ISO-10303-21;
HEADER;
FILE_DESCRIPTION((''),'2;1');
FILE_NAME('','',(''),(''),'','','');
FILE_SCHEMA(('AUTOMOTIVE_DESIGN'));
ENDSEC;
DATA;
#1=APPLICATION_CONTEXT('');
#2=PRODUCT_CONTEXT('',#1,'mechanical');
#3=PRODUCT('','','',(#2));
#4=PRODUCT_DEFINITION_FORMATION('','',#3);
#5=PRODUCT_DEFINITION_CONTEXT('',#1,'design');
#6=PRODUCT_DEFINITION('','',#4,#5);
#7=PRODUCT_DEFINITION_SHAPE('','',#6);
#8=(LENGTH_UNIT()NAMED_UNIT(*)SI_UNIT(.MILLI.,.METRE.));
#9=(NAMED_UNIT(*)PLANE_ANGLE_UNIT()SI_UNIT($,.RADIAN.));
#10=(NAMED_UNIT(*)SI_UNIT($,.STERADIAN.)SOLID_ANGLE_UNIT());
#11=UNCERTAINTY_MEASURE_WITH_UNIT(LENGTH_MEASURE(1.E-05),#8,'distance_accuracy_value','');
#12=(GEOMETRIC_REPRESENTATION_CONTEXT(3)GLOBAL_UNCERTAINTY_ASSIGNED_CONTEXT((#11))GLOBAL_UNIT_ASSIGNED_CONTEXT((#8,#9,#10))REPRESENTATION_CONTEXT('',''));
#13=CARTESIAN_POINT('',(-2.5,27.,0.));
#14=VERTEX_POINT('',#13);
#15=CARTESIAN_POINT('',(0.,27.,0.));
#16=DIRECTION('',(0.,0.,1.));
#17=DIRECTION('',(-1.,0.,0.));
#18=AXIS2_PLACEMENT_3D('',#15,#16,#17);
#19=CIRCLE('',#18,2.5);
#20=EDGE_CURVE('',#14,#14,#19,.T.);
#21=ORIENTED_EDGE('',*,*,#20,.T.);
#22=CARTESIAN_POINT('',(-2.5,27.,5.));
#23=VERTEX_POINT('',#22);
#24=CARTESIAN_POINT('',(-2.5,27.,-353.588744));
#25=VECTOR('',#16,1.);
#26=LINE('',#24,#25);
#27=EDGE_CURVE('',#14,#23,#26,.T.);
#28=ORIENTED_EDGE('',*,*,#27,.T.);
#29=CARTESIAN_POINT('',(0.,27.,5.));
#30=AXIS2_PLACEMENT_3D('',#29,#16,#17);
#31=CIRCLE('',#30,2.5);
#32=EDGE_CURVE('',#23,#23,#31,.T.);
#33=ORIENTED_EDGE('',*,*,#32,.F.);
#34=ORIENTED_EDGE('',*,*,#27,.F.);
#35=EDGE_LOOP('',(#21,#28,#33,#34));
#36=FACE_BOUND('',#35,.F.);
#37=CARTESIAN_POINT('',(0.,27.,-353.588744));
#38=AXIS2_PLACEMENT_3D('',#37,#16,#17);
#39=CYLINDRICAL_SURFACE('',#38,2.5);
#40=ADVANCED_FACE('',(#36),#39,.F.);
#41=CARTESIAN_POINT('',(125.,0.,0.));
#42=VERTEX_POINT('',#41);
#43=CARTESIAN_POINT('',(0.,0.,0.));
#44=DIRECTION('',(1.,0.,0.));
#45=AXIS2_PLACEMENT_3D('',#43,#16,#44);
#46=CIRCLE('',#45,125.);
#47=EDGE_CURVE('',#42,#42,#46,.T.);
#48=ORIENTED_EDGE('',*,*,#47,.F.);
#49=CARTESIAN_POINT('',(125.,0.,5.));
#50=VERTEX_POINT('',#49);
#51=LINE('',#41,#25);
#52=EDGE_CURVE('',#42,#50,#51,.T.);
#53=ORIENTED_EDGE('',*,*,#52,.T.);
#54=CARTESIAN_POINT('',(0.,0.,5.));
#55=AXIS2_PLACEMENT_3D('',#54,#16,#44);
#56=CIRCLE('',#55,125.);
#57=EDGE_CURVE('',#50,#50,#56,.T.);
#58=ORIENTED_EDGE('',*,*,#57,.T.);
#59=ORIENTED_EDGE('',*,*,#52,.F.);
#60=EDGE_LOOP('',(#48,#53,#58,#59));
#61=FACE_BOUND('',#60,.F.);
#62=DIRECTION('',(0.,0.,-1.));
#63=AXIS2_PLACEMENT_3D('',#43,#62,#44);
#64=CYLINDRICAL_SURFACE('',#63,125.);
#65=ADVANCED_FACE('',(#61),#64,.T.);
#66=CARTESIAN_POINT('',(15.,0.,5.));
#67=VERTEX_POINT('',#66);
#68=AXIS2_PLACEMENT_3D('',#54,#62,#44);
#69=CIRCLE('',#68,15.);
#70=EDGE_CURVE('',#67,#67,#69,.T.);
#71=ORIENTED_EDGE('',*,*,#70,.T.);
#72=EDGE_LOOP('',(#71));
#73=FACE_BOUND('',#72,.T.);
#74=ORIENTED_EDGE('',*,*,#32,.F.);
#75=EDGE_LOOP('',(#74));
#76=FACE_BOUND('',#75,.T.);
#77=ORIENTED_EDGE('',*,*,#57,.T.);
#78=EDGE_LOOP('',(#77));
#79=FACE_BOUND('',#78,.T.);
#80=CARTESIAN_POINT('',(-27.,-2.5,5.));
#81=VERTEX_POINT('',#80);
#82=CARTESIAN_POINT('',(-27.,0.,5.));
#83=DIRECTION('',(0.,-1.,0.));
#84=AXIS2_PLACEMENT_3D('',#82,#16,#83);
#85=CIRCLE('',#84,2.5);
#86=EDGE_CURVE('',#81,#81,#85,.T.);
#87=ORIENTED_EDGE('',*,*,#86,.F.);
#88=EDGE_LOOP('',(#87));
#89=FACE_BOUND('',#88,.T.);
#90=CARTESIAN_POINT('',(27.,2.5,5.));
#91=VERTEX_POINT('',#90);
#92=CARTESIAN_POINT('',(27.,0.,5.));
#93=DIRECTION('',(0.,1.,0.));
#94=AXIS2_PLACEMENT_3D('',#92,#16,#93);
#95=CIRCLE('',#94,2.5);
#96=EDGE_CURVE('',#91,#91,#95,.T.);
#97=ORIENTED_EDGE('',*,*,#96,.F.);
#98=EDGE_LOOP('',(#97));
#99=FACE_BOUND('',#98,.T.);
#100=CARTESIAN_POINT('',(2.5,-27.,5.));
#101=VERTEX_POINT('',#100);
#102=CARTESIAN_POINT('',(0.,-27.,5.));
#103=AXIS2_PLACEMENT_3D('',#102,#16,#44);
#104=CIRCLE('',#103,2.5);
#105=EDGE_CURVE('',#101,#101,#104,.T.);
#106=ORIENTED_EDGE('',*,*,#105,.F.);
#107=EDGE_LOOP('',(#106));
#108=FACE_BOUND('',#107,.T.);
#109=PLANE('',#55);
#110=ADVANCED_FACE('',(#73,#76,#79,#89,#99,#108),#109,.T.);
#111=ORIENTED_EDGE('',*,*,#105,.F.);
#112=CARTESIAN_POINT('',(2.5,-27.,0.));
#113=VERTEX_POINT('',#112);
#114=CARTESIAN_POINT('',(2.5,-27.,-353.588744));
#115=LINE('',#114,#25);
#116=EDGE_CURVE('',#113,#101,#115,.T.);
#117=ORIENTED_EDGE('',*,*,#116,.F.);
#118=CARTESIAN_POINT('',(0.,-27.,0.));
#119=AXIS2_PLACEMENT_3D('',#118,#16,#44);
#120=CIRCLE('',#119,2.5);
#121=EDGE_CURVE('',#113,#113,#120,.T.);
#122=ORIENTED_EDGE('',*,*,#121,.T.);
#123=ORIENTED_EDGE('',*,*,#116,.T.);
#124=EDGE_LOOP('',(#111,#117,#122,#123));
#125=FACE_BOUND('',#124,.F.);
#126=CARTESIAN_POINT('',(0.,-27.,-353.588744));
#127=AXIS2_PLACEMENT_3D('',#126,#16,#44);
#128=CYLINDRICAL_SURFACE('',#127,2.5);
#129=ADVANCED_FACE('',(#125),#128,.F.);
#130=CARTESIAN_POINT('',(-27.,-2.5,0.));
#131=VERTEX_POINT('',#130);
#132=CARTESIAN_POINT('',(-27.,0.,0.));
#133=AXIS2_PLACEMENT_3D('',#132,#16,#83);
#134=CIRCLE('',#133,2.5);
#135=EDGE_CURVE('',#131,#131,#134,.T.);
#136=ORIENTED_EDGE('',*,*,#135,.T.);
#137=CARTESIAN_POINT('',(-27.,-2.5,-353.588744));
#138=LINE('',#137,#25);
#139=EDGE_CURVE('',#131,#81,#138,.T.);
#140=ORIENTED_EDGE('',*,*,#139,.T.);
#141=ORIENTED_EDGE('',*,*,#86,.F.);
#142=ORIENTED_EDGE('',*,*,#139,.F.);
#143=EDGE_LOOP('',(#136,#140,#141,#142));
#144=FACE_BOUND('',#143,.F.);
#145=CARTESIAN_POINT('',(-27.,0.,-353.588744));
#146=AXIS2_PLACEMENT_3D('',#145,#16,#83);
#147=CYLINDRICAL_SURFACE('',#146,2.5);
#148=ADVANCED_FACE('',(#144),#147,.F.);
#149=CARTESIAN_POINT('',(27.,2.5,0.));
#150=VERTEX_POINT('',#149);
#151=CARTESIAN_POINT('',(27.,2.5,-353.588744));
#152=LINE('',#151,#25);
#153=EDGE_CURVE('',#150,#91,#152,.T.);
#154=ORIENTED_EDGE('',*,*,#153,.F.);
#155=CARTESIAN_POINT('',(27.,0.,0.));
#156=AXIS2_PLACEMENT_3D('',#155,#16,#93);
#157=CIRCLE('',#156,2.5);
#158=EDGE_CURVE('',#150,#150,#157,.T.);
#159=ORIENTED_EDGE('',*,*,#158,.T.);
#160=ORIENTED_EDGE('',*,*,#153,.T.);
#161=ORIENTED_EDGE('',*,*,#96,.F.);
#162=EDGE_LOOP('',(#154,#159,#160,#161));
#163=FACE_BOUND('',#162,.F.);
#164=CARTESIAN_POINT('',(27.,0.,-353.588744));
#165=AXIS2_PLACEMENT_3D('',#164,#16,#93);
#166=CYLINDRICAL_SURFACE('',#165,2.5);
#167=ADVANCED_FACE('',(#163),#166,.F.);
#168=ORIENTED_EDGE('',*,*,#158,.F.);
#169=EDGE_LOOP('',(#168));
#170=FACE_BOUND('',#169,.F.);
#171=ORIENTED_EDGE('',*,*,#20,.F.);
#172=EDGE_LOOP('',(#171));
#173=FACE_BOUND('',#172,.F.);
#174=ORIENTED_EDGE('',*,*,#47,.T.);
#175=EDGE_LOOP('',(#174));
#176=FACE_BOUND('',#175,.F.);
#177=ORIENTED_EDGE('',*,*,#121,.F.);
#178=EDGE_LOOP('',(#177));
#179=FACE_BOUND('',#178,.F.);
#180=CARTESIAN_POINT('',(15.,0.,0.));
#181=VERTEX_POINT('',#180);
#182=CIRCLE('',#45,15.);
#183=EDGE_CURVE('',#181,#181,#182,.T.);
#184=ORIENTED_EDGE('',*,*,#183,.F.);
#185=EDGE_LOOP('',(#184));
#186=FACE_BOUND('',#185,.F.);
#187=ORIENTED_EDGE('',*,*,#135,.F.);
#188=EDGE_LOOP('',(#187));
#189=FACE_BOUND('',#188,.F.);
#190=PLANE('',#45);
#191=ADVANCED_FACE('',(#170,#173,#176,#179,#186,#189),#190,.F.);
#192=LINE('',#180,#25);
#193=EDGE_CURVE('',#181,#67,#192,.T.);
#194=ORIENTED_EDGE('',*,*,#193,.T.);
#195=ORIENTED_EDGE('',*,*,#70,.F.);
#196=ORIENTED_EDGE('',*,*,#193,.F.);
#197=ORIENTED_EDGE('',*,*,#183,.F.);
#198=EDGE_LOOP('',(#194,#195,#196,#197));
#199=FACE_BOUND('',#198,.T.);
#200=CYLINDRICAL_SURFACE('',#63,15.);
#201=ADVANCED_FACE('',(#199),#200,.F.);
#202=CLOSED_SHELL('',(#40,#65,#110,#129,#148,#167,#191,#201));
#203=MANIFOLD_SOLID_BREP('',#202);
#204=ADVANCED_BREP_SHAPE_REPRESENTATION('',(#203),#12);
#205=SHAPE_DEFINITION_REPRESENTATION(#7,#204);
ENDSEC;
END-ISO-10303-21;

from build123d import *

# Parameters (mm, degrees)
F0_R            = 125
F2_DEPTH        = 5
F1_R            = 15
F3_DEPTH        = 5.001
F5_D            = 5
F5_COPIES_COUNT = 4


# Not quite as in the source:
# - a pattern or mirror of a feature is missing from the dataset's text; its kind, count and spacing are read off the source's solid
# - a feature names something its author has since deleted; it is built from what else it names


with BuildPart() as f2:
    # F0 (on Top) → F2 (new body)
    with BuildSketch(Plane.XY):
        Circle(F0_R)
    extrude(amount=F2_DEPTH)

    # F1 (on Top) → F3 (cut, through all)
    with BuildSketch(Plane.XY):
        Circle(F1_R)
    extrude(amount=F3_DEPTH, mode=Mode.SUBTRACT)

    # F5 (through all)
    with Locations(Plane(origin=(0, 0, 0), x_dir=(1, 0, 0), z_dir=(0, 0, -1))):
        with Locations((0, -27)):
            f5 = Hole(F5_D / 2)

    # F5_copies: F5 ×4 about axis
    f5_copies_axis = Axis((0, 0, 0), (0, 0, 1))
    for i in range(1, F5_COPIES_COUNT):
        add(f5.rotate(f5_copies_axis, i * 360 / F5_COPIES_COUNT), mode=Mode.SUBTRACT)


solid = f2.part
